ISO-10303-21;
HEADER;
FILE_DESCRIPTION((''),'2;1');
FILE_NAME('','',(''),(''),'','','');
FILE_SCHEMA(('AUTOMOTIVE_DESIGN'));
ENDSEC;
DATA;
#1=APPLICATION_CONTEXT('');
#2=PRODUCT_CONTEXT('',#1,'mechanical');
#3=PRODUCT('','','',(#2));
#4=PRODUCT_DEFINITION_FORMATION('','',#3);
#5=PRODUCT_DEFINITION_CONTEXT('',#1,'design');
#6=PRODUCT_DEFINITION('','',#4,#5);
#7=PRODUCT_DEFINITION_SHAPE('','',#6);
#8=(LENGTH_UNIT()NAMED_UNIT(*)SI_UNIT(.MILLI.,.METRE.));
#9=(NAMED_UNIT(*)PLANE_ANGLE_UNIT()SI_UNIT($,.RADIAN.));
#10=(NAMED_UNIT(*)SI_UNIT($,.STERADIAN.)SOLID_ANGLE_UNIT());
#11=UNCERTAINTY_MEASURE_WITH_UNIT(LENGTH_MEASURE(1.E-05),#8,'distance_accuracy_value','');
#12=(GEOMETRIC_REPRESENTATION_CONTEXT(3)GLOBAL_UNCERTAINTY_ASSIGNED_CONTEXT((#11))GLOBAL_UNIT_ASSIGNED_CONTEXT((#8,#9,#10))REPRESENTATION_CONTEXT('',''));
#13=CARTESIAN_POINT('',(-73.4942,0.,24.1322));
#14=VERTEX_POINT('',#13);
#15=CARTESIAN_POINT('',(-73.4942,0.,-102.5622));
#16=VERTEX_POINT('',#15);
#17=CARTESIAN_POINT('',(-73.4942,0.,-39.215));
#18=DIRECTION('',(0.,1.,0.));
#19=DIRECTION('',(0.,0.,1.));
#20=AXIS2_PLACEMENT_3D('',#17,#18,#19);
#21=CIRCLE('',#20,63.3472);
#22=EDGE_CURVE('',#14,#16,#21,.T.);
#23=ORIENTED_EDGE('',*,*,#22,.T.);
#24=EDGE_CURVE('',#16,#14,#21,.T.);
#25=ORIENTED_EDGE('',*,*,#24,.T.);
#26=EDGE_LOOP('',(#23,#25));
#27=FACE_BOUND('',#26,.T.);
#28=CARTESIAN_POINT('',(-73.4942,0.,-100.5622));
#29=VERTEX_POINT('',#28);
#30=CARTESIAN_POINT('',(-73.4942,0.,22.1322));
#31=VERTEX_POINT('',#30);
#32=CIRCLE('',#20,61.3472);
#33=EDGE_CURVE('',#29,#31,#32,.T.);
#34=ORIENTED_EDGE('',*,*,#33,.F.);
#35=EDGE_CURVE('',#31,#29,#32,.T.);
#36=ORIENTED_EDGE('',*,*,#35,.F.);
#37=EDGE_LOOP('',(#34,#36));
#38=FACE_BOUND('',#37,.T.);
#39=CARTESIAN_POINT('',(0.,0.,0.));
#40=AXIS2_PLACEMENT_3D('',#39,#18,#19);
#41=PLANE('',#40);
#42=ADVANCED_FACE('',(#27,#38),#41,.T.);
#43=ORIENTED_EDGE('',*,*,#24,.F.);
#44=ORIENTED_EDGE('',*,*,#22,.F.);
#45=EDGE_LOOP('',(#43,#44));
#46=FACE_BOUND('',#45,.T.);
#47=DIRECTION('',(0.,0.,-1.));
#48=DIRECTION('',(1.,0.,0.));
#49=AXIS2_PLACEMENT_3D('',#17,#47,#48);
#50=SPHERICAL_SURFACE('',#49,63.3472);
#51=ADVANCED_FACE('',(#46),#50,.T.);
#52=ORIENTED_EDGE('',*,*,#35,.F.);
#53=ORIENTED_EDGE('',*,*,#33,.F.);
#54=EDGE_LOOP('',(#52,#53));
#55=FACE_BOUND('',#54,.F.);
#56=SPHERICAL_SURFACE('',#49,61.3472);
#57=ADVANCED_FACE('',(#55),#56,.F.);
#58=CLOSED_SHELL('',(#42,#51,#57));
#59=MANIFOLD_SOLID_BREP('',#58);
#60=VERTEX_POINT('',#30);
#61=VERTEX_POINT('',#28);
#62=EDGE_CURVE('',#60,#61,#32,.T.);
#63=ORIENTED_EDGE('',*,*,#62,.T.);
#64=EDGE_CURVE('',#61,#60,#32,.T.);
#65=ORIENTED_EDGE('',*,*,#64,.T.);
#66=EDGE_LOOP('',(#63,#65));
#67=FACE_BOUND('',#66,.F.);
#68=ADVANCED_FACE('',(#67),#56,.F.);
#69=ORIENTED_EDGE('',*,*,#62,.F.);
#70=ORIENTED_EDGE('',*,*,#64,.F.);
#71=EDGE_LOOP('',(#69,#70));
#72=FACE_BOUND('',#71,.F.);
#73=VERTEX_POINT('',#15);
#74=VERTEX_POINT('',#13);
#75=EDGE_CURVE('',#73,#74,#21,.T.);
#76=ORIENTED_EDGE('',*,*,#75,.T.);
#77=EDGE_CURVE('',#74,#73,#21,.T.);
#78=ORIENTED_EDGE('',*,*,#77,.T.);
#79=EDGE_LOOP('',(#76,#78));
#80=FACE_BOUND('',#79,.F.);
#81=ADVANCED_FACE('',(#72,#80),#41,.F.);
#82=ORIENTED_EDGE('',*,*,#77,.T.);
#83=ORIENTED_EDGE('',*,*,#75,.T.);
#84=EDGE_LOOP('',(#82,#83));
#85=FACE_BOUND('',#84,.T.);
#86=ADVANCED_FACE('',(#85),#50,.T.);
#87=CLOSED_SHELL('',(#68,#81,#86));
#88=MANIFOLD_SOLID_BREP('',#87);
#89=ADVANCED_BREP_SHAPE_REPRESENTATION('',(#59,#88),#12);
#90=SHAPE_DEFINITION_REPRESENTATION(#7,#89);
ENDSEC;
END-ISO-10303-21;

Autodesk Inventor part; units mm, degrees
ref_plane "YZ Plane" through (0, 0, 0) normal (1, 0, 0) x (0, 1, 0)
ref_plane "XY Plane" through (0, 0, 0) normal (0, 0, 1) x (1, 0, 0)
sketch "Sketch1" plane through (0, 0, 0) normal (0, 1, 0) x (-1, 0, 0)
  line L0 (33.043, -39.215) -> (33.043, 9.535)
  line L1 (33.043, -39.215) -> (33.043, -87.965)
  arc A0 (73.4942, 24.1322) -> (73.4942, -102.5622) centre (73.4942, -39.215) ccw
  line L2 (33.043, -39.215) -> (33.043, -87.965)
  line L3 (73.4942, 24.1322) -> (73.4942, -102.5622)
  point P0 (0, 0)
  point P1 (24.033, -39.215)
  point P2 (28.773, -39.215)
  point P3 (56.273, -39.215)
  point P4 (12.147, -39.215)
  point P5 (10.147, -39.215)
  point P6 (16.8762, -39.215)
  dimension "d6" = 9.01
  dimension "d8" = 48.75
  dimension "d9" = 48.75
  dimension "d10" = 126.6944
  dimension "d14" = 4.27
  dimension "d15" = 27.5
  dimension "d16" = 2
  dimension "d17" = 11.8968
revolve "Revolution1" add sketch "Sketch1" angle 360 about axis through (-73.4942, 0, 24.1322) along (0, 0, -1)
shell "Shell1" thickness 2 removed faces 0
split body "Split2" result two bodies by plane through (0, 0, 0) normal (0, 1, 0) first body at (-25.4319, 40.3291, -42.8692)
properties part number "guscio sferico"
